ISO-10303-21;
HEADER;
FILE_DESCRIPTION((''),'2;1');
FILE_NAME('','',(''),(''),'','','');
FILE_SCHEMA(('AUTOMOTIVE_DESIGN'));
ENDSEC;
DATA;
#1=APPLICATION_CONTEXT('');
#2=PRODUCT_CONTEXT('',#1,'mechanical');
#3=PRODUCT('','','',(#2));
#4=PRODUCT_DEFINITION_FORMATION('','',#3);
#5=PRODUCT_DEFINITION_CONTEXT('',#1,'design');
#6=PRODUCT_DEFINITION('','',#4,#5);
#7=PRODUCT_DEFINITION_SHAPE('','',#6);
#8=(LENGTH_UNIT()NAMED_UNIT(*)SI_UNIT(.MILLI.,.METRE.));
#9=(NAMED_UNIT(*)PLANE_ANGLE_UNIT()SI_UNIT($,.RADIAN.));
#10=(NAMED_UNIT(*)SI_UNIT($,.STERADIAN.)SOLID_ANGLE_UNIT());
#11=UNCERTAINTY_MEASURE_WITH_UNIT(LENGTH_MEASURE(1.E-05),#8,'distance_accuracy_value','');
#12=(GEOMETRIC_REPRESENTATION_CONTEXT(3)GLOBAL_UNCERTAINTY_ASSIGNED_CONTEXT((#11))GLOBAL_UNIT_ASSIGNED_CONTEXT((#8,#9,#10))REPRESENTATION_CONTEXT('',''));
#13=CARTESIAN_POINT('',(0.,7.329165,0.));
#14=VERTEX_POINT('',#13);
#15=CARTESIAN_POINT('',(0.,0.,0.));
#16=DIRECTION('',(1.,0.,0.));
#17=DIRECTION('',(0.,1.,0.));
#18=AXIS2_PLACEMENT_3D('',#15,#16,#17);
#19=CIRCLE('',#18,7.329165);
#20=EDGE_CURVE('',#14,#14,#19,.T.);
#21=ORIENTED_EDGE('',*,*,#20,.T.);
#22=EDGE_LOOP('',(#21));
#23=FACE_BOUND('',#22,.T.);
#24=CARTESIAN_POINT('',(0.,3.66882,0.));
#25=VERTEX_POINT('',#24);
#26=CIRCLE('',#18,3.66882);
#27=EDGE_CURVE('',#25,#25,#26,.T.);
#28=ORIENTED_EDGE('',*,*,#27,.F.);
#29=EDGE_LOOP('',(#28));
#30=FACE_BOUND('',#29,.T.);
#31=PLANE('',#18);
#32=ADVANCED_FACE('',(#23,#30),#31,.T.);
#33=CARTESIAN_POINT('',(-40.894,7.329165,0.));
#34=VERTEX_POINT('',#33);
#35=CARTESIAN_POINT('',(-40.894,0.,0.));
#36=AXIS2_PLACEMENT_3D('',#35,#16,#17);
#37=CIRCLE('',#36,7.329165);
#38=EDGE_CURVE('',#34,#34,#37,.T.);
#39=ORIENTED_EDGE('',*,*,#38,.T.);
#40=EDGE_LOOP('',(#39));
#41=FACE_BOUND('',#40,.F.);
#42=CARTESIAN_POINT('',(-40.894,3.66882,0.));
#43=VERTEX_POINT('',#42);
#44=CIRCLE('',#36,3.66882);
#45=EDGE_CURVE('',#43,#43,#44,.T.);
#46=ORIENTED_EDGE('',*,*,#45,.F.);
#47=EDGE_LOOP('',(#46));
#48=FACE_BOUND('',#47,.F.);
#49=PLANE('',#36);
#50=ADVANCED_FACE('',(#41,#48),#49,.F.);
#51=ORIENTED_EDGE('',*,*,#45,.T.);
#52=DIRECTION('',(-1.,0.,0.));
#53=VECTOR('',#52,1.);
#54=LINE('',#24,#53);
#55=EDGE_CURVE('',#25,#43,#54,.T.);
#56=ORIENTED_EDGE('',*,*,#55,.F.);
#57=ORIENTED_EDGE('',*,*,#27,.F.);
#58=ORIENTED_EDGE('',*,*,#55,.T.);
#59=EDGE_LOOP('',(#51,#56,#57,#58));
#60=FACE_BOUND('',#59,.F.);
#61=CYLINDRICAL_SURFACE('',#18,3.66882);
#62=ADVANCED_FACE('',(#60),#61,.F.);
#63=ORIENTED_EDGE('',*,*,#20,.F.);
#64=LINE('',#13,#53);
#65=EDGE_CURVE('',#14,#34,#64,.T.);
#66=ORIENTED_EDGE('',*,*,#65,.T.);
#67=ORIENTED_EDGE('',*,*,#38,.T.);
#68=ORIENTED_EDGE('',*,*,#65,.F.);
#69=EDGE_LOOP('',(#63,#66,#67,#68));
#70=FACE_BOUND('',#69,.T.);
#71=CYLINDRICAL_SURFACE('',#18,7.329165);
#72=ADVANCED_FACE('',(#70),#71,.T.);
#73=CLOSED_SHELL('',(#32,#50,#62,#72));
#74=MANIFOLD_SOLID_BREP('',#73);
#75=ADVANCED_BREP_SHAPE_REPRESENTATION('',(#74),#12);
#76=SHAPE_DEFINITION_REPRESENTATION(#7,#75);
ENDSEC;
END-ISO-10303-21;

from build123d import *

# Parameters (mm, degrees)
F0_R     = 7.3291649142
F1_DEPTH = 40.894
F2_R     = 3.66881969
F3_DEPTH = 81.534


# Not quite as in the source:
# - a feature names something its author has since deleted; it is built from what else it names


with BuildPart() as f1:
    # F0 (on Right) → F1 (new body)
    with BuildSketch(Plane.YZ):
        Circle(F0_R)
    extrude(amount=-F1_DEPTH)

    # F2 (on Right) → F3 (cut)
    with BuildSketch(Plane.YZ):
        Circle(F2_R)
    extrude(amount=-F3_DEPTH, mode=Mode.SUBTRACT)


solid = f1.part
